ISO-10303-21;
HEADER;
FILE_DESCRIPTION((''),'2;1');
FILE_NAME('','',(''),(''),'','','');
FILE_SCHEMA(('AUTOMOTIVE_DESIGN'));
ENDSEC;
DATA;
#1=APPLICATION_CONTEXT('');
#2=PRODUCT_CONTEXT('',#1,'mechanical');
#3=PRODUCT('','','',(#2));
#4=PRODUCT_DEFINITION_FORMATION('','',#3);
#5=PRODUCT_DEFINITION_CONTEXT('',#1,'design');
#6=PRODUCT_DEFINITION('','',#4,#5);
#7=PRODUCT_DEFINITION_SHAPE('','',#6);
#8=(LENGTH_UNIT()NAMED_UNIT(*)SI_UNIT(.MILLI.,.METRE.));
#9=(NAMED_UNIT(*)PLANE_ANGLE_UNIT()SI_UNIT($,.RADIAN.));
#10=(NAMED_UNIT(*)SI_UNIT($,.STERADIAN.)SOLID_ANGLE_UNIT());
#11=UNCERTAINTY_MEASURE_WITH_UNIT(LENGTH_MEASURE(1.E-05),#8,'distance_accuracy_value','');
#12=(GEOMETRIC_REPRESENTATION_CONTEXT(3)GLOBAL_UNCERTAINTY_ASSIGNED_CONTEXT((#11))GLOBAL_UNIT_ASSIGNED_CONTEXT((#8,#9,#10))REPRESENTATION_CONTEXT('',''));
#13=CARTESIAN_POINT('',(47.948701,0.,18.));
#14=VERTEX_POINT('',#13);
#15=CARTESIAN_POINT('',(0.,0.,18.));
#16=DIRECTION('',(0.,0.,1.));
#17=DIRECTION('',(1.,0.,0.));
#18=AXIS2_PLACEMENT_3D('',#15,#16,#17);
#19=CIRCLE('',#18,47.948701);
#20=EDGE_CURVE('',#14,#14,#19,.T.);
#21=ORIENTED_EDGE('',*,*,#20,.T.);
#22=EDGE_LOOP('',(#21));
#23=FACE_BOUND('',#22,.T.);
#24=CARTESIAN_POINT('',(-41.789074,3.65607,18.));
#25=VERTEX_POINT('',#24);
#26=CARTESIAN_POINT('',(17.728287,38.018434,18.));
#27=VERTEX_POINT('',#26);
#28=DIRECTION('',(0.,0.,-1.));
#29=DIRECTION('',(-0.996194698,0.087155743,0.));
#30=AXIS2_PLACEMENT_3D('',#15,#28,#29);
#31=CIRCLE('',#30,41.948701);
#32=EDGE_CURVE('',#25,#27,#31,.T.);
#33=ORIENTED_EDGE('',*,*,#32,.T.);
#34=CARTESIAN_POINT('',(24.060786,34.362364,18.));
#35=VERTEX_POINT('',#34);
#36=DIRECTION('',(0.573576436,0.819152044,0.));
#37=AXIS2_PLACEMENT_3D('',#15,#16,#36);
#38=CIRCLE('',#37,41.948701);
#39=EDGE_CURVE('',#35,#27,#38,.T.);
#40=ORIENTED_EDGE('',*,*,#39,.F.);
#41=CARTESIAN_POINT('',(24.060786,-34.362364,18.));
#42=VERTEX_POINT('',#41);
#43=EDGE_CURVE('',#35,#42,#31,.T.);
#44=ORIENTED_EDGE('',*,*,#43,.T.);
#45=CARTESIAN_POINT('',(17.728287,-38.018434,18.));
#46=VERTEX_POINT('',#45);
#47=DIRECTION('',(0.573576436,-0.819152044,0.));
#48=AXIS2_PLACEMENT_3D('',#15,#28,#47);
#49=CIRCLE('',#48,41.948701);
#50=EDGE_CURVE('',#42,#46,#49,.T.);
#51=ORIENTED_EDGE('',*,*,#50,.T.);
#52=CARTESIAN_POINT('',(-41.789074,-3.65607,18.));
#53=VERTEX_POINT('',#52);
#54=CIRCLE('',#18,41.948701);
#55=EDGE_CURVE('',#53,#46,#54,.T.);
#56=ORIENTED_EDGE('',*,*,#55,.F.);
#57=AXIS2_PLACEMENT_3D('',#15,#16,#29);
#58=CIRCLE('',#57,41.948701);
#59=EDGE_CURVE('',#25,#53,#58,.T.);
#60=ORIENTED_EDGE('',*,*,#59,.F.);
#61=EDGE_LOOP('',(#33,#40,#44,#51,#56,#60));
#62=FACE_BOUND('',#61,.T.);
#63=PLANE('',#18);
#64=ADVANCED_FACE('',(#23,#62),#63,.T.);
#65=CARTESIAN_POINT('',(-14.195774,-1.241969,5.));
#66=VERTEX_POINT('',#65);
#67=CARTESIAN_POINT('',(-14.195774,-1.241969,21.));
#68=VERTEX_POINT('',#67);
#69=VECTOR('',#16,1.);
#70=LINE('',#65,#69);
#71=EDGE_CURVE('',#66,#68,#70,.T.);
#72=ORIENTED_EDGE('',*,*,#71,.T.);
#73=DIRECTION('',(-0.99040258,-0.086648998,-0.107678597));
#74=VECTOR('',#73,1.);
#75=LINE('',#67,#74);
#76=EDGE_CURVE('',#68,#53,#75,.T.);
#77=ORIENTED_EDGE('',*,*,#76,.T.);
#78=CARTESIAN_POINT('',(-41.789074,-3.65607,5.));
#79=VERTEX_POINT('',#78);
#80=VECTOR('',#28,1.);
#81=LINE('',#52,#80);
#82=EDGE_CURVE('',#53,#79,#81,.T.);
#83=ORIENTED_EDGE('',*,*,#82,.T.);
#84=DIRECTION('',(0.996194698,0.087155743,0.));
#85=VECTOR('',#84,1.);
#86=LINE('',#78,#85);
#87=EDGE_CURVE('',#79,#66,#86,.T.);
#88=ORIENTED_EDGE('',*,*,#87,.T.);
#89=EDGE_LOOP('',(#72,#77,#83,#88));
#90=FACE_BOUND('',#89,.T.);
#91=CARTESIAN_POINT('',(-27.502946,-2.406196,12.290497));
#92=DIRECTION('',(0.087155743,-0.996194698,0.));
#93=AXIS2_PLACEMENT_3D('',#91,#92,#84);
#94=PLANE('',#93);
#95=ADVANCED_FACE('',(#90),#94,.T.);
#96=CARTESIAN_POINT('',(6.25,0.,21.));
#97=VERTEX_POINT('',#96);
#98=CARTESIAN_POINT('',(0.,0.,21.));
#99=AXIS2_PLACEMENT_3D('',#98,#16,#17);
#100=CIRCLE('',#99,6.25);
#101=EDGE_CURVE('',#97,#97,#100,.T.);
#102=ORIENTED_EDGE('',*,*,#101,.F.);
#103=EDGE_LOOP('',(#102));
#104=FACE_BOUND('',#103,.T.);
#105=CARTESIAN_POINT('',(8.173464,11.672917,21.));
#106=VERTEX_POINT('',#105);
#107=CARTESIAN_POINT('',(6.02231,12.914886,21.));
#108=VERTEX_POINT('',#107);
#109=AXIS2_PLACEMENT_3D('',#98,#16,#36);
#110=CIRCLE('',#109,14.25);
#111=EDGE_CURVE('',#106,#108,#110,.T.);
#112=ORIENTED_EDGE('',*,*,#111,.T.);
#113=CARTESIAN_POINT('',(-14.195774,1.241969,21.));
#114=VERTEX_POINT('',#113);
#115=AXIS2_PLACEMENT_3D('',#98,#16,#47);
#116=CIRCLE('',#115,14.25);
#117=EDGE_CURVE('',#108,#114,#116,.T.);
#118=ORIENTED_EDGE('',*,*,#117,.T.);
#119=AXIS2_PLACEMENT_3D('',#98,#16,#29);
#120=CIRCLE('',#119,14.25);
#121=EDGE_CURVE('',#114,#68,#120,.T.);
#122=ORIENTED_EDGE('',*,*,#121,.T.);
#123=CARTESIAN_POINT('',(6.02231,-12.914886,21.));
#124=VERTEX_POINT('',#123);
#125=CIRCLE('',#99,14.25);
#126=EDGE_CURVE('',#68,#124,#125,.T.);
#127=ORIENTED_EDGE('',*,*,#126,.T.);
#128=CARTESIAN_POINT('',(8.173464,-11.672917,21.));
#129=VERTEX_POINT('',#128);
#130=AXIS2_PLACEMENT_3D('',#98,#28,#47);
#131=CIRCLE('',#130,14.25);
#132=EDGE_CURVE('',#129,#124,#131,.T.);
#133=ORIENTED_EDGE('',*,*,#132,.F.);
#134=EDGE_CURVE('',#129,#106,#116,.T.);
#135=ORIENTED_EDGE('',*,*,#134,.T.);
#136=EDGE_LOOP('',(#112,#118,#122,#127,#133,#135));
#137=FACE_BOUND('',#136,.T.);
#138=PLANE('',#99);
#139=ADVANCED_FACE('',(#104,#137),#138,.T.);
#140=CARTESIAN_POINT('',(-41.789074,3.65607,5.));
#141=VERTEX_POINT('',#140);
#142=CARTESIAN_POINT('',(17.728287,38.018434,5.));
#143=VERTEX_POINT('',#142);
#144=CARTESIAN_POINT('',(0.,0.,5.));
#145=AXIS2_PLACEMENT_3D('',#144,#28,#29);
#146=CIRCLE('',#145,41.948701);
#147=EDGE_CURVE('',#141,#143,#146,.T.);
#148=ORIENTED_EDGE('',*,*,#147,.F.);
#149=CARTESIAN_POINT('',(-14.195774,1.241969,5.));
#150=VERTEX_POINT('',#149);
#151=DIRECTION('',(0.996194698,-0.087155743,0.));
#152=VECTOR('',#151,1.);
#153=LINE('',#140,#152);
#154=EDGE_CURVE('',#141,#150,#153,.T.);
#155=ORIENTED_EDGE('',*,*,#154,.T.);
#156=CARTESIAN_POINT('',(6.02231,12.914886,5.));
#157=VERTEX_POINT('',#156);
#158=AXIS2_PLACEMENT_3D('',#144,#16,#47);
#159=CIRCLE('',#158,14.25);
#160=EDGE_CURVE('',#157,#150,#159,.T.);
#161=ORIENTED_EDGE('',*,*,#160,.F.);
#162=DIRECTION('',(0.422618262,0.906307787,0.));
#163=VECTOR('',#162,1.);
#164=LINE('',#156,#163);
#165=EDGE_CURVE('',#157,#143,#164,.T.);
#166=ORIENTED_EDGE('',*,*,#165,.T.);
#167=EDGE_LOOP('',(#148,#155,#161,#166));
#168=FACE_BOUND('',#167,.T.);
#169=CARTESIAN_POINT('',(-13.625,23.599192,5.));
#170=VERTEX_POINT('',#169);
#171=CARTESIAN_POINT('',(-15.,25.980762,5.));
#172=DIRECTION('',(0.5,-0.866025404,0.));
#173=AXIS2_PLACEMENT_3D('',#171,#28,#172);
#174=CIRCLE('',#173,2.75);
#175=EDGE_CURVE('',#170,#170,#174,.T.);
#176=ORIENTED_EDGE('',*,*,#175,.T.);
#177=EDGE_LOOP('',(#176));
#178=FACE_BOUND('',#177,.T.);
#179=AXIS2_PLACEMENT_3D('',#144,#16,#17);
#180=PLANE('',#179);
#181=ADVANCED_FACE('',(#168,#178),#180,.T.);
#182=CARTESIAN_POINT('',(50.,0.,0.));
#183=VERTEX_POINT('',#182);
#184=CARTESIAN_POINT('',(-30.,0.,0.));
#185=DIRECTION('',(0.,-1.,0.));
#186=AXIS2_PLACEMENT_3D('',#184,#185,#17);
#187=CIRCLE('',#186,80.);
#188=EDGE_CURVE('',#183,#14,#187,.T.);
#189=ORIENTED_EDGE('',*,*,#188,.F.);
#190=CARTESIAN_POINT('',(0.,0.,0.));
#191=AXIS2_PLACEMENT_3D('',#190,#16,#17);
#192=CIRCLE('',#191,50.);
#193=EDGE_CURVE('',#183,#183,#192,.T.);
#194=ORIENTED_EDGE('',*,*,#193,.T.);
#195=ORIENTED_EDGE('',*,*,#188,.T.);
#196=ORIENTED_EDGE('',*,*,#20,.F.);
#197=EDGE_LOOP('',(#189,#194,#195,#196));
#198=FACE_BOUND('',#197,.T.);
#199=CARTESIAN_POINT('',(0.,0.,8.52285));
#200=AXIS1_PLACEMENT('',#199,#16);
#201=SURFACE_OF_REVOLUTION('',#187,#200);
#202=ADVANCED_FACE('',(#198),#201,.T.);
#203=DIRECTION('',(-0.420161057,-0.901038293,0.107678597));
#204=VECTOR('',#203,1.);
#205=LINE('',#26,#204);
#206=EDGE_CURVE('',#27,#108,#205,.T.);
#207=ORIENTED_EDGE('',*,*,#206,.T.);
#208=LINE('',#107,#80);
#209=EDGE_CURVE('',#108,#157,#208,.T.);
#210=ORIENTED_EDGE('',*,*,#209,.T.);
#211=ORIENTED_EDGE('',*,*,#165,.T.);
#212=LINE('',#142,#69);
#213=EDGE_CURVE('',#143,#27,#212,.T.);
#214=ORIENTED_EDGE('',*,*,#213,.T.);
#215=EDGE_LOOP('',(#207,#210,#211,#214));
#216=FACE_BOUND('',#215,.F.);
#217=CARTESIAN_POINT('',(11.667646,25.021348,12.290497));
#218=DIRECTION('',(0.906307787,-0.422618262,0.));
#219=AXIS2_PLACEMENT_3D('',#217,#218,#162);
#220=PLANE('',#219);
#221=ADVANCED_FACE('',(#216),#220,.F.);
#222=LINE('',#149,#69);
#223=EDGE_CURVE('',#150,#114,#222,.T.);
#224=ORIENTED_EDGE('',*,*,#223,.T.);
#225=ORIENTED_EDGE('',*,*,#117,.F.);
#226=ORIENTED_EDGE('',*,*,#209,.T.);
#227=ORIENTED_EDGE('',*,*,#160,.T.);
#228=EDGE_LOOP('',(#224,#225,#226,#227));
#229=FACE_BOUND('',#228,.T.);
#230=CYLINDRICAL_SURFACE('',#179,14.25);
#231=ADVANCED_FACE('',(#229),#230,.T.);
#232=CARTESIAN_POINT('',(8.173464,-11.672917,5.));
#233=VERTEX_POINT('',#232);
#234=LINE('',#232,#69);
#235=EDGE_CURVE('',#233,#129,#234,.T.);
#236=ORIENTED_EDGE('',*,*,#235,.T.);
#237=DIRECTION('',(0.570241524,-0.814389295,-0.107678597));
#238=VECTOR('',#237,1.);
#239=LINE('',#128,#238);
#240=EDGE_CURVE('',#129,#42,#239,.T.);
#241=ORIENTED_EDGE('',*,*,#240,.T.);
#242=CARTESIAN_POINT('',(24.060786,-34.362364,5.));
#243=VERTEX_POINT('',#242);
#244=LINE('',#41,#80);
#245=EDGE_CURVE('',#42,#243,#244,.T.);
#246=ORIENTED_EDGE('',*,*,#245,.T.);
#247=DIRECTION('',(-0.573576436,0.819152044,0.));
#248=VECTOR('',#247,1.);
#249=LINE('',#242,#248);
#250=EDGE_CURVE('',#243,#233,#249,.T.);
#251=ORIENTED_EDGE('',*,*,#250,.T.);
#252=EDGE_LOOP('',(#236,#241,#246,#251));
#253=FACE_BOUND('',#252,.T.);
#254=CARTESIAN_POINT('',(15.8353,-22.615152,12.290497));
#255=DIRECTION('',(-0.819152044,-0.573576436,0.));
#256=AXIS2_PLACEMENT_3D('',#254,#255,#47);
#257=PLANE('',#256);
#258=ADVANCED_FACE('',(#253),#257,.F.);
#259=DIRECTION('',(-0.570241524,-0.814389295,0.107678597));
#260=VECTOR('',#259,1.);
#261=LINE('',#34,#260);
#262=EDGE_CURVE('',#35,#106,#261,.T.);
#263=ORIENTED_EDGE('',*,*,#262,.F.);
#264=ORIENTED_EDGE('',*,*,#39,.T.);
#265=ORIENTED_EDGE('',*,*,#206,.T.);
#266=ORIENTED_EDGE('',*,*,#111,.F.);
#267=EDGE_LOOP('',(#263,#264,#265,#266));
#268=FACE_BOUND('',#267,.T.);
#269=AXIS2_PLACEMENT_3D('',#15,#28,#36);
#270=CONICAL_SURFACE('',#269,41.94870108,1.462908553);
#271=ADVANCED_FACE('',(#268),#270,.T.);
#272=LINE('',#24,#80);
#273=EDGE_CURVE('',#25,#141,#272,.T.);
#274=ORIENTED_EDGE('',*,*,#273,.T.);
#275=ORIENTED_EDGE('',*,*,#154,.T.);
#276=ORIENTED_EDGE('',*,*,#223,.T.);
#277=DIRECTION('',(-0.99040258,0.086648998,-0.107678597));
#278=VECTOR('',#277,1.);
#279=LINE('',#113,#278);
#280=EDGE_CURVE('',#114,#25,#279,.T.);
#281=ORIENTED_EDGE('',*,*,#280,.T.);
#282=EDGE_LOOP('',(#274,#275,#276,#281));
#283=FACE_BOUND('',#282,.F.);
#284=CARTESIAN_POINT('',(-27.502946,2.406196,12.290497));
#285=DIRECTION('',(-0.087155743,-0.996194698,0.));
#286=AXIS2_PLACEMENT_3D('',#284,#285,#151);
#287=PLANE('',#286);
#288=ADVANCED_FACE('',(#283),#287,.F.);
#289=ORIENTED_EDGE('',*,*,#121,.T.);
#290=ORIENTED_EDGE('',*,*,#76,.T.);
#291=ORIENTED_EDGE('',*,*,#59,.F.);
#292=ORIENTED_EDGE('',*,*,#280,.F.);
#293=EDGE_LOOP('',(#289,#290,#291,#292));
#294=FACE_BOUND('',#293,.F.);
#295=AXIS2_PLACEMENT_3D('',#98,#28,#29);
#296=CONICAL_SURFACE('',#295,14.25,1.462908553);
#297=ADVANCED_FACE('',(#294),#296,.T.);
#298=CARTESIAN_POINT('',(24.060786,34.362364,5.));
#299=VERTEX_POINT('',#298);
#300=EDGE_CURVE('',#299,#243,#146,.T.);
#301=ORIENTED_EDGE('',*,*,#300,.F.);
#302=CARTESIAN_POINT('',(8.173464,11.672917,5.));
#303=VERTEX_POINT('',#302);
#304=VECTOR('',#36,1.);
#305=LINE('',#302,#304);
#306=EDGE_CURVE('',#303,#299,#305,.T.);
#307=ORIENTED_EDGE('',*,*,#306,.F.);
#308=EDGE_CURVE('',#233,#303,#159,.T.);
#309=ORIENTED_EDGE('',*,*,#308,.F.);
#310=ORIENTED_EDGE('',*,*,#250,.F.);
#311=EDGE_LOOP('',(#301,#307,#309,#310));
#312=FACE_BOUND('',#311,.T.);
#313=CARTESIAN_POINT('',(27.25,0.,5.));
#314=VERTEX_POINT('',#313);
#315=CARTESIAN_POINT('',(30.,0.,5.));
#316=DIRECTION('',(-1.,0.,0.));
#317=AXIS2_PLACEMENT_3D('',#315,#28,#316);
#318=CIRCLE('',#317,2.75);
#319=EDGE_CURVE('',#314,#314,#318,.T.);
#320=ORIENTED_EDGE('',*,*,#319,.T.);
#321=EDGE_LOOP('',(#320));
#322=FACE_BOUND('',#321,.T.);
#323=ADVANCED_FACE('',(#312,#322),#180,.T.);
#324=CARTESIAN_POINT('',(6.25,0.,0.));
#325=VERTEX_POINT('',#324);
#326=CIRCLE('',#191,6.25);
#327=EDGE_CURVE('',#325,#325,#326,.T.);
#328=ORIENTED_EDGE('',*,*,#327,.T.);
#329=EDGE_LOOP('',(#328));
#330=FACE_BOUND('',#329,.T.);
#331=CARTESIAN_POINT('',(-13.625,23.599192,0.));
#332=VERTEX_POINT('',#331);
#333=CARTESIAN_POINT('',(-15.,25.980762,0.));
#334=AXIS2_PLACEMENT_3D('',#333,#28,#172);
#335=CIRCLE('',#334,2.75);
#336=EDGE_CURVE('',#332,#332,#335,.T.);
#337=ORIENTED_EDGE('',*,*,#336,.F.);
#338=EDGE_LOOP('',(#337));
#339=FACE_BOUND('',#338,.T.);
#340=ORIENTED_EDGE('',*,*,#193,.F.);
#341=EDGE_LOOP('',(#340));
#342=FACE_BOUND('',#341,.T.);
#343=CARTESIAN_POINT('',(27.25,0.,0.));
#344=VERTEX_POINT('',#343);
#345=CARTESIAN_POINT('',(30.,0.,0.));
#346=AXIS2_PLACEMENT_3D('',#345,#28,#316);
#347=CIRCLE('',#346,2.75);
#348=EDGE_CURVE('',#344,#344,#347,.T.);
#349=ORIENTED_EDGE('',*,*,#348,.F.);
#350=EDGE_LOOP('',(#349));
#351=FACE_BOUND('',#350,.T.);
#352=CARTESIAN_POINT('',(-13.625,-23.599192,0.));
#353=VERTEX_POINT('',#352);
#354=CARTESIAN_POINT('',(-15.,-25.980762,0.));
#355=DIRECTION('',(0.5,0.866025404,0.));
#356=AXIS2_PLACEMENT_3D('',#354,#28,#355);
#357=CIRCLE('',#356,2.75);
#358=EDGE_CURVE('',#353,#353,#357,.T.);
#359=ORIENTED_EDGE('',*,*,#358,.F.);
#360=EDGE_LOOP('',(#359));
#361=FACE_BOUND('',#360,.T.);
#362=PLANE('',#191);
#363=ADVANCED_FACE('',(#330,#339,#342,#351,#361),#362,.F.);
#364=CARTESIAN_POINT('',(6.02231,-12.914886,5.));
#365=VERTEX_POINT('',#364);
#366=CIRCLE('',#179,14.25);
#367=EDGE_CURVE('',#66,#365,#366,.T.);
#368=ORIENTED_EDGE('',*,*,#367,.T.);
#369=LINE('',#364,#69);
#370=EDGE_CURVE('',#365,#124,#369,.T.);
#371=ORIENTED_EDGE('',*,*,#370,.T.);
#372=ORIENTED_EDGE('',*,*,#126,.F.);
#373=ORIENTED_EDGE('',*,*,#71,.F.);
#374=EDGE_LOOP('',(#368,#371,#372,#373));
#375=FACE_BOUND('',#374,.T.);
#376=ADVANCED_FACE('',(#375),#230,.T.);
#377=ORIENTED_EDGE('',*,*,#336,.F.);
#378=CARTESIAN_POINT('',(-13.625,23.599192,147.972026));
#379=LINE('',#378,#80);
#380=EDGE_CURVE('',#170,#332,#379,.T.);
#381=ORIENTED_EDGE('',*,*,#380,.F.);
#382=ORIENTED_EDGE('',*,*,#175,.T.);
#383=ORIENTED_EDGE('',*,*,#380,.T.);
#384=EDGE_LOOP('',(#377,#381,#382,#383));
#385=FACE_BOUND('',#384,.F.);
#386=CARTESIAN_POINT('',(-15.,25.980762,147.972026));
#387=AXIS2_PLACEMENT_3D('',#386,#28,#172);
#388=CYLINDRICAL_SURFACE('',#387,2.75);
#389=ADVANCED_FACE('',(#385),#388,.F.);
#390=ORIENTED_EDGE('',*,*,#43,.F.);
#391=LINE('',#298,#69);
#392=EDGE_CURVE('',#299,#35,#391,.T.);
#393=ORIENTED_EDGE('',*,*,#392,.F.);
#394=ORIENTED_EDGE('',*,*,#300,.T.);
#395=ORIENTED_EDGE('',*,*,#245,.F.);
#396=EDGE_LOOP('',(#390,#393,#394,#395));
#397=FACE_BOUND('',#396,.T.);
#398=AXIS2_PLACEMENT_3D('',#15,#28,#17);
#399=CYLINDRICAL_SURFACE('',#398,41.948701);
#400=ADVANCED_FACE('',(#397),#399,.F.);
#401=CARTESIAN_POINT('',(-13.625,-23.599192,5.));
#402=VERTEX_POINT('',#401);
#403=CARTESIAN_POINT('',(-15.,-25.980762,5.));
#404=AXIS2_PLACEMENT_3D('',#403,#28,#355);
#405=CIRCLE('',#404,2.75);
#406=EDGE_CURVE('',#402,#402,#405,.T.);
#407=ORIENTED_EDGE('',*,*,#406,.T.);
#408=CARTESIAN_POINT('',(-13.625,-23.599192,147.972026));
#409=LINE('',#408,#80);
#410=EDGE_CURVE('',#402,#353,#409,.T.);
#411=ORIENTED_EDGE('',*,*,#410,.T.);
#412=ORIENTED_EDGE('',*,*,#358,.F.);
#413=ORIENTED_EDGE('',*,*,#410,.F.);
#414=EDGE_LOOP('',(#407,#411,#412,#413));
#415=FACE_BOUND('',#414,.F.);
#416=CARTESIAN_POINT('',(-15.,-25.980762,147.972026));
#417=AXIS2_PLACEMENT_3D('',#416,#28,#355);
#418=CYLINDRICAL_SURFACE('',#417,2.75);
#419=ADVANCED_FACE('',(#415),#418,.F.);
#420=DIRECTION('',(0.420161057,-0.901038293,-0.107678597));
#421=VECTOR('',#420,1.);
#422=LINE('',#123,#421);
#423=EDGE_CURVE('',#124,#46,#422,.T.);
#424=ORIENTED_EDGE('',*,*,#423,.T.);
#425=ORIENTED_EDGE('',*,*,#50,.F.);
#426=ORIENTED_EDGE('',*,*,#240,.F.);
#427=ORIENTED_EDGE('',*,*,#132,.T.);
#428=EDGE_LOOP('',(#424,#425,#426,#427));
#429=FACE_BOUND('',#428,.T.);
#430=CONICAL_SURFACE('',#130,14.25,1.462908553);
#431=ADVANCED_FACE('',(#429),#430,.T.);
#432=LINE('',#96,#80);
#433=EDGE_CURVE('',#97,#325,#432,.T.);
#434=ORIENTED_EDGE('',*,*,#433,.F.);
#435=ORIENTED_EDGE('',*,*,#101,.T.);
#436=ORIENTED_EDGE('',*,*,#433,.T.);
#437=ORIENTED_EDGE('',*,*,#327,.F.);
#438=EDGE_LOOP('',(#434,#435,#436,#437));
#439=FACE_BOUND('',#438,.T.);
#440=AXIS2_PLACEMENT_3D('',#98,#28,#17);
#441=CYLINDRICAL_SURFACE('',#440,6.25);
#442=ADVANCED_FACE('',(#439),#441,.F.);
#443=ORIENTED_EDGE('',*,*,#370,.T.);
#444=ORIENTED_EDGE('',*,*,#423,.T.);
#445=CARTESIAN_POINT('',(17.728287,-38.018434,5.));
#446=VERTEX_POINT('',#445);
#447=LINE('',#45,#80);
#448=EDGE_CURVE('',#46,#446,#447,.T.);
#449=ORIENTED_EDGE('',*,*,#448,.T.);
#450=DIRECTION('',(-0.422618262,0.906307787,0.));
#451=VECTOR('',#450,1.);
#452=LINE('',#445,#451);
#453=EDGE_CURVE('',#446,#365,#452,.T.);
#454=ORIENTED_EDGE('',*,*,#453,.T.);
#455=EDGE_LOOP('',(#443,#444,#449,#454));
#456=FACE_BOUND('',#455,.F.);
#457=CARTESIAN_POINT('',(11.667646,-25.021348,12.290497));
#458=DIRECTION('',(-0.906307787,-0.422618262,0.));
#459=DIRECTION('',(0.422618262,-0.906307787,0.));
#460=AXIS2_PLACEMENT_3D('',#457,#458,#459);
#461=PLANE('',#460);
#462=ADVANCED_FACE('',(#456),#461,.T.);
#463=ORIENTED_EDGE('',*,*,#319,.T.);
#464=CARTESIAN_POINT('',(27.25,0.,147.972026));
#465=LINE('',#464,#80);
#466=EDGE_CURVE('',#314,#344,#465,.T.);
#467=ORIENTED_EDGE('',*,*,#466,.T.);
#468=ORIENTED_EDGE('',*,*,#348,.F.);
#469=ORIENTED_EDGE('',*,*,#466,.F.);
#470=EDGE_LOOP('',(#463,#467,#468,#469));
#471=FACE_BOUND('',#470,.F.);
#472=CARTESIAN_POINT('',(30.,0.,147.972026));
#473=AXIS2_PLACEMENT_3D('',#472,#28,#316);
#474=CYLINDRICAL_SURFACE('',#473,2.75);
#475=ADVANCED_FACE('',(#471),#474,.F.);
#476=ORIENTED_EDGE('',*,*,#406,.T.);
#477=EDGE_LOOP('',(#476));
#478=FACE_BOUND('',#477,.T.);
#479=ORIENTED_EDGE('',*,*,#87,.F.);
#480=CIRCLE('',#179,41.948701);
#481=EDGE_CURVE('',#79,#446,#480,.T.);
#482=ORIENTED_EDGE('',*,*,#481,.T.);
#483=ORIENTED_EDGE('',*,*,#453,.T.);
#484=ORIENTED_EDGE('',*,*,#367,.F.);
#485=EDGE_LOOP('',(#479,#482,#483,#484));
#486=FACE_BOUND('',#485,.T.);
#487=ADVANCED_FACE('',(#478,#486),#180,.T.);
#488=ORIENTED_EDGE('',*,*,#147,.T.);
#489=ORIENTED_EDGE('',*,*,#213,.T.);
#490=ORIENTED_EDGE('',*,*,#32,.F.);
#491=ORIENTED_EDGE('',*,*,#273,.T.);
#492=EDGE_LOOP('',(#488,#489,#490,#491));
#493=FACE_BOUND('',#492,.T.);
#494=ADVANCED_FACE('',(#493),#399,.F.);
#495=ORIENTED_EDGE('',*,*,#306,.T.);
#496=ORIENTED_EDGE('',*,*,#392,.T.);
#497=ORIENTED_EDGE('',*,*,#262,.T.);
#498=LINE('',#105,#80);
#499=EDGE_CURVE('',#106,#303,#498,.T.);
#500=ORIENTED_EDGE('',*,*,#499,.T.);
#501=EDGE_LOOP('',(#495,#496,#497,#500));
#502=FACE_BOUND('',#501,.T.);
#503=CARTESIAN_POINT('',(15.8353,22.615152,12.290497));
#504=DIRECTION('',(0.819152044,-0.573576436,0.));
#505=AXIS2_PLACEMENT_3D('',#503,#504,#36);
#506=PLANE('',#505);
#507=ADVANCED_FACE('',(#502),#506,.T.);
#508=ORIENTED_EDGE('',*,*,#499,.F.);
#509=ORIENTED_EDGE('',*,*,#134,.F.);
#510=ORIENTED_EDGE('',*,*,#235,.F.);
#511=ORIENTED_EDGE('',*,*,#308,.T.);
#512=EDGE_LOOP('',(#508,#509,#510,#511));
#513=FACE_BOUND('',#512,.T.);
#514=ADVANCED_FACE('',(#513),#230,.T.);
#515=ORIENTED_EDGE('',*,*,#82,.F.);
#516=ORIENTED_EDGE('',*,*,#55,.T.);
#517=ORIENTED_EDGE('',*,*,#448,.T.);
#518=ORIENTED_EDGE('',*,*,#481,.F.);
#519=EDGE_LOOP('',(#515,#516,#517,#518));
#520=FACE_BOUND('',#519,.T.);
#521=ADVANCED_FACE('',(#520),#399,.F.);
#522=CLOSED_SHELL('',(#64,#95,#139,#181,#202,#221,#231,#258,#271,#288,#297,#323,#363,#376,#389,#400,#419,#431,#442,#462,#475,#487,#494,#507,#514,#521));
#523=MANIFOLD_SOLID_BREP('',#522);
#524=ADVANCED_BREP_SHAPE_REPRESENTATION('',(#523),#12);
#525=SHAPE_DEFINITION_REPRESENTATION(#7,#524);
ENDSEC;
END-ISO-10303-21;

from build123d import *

# Parameters (mm, degrees)
F3_ANGLE_BACK   = 5
F3_ANGLE        = 10
F5_D            = 5.5
F5_COPIES_COUNT = 3
F8_ANGLE_BACK   = 5
F8_ANGLE        = 10


# Not quite as in the source:
# - a pattern or mirror of a feature is missing from the dataset's text; its kind, count and spacing are read off the source's solid


with BuildPart() as f1:
    # F0 (on Front) → F1 (revolve)
    with BuildSketch(Plane.XZ):
        with BuildLine():
            Line((41.9487010796, 5), (14.25, 5))
            Line((14.25, 5), (14.25, 21))
            Line((14.25, 21), (6.25, 21))
            Line((6.25, 21), (6.25, 0))
            Line((6.25, 0), (50, 0))
            ThreePointArc((50, 0), (49.4855209657, 9.058253519), (47.9487010796, 18))
            Line((47.9487010796, 18), (41.9487010796, 18))
            Line((41.9487010796, 18), (41.9487010796, 5))
        make_face()
    revolve(axis=Axis((0, 0, 8.5228504971), (0, 0, 1)))

    # F2 (on Front) → F3 (revolve)
    with BuildSketch(Plane.XZ, mode=Mode.PRIVATE) as f3_sk:
        Polygon((-14.25, 21), (-41.9487010796, 18), (-41.9487010796, 5), (-14.25, 5), align=None)
    f3 = revolve(f3_sk.sketch.rotate(Axis((0, 0, 5), (0, 0, 1)), -F3_ANGLE_BACK), axis=Axis((0, 0, 5), (0, 0, 1)), revolution_arc=F3_ANGLE)

    # F3_copies: F3 across plane
    add(f3.mirror(Plane(origin=(0, 0, 0), x_dir=(0.5, 0.8660254038, 0), z_dir=(0.8660254038, -0.5, 0))))

    # F5 (through all)
    with Locations(Plane.XY.offset(5)):
        with Locations((30, 0)):
            f5 = Hole(F5_D / 2)

    # F5_copies: F5 ×3 about axis
    f5_copies_axis = Axis((0, 0, 0), (0, 0, 1))
    for i in range(1, F5_COPIES_COUNT):
        add(f5.rotate(f5_copies_axis, i * 360 / F5_COPIES_COUNT), mode=Mode.SUBTRACT)

    # F7 (on face) → F8 (revolve)
    with BuildSketch(Plane(origin=(0, 0, 0), x_dir=(0.5, 0.8660254038, 0), z_dir=(0.8660254038, -0.5, 0)), mode=Mode.PRIVATE) as f8_sk:
        Polygon((14.25, 5), (41.9487010796, 5), (41.9487010796, 18), (14.25, 21), align=None)
    revolve(f8_sk.sketch.rotate(Axis((0, 0, 5), (0, 0, 1)), -F8_ANGLE_BACK), axis=Axis((0, 0, 5), (0, 0, 1)), revolution_arc=F8_ANGLE)


solid = f1.part
